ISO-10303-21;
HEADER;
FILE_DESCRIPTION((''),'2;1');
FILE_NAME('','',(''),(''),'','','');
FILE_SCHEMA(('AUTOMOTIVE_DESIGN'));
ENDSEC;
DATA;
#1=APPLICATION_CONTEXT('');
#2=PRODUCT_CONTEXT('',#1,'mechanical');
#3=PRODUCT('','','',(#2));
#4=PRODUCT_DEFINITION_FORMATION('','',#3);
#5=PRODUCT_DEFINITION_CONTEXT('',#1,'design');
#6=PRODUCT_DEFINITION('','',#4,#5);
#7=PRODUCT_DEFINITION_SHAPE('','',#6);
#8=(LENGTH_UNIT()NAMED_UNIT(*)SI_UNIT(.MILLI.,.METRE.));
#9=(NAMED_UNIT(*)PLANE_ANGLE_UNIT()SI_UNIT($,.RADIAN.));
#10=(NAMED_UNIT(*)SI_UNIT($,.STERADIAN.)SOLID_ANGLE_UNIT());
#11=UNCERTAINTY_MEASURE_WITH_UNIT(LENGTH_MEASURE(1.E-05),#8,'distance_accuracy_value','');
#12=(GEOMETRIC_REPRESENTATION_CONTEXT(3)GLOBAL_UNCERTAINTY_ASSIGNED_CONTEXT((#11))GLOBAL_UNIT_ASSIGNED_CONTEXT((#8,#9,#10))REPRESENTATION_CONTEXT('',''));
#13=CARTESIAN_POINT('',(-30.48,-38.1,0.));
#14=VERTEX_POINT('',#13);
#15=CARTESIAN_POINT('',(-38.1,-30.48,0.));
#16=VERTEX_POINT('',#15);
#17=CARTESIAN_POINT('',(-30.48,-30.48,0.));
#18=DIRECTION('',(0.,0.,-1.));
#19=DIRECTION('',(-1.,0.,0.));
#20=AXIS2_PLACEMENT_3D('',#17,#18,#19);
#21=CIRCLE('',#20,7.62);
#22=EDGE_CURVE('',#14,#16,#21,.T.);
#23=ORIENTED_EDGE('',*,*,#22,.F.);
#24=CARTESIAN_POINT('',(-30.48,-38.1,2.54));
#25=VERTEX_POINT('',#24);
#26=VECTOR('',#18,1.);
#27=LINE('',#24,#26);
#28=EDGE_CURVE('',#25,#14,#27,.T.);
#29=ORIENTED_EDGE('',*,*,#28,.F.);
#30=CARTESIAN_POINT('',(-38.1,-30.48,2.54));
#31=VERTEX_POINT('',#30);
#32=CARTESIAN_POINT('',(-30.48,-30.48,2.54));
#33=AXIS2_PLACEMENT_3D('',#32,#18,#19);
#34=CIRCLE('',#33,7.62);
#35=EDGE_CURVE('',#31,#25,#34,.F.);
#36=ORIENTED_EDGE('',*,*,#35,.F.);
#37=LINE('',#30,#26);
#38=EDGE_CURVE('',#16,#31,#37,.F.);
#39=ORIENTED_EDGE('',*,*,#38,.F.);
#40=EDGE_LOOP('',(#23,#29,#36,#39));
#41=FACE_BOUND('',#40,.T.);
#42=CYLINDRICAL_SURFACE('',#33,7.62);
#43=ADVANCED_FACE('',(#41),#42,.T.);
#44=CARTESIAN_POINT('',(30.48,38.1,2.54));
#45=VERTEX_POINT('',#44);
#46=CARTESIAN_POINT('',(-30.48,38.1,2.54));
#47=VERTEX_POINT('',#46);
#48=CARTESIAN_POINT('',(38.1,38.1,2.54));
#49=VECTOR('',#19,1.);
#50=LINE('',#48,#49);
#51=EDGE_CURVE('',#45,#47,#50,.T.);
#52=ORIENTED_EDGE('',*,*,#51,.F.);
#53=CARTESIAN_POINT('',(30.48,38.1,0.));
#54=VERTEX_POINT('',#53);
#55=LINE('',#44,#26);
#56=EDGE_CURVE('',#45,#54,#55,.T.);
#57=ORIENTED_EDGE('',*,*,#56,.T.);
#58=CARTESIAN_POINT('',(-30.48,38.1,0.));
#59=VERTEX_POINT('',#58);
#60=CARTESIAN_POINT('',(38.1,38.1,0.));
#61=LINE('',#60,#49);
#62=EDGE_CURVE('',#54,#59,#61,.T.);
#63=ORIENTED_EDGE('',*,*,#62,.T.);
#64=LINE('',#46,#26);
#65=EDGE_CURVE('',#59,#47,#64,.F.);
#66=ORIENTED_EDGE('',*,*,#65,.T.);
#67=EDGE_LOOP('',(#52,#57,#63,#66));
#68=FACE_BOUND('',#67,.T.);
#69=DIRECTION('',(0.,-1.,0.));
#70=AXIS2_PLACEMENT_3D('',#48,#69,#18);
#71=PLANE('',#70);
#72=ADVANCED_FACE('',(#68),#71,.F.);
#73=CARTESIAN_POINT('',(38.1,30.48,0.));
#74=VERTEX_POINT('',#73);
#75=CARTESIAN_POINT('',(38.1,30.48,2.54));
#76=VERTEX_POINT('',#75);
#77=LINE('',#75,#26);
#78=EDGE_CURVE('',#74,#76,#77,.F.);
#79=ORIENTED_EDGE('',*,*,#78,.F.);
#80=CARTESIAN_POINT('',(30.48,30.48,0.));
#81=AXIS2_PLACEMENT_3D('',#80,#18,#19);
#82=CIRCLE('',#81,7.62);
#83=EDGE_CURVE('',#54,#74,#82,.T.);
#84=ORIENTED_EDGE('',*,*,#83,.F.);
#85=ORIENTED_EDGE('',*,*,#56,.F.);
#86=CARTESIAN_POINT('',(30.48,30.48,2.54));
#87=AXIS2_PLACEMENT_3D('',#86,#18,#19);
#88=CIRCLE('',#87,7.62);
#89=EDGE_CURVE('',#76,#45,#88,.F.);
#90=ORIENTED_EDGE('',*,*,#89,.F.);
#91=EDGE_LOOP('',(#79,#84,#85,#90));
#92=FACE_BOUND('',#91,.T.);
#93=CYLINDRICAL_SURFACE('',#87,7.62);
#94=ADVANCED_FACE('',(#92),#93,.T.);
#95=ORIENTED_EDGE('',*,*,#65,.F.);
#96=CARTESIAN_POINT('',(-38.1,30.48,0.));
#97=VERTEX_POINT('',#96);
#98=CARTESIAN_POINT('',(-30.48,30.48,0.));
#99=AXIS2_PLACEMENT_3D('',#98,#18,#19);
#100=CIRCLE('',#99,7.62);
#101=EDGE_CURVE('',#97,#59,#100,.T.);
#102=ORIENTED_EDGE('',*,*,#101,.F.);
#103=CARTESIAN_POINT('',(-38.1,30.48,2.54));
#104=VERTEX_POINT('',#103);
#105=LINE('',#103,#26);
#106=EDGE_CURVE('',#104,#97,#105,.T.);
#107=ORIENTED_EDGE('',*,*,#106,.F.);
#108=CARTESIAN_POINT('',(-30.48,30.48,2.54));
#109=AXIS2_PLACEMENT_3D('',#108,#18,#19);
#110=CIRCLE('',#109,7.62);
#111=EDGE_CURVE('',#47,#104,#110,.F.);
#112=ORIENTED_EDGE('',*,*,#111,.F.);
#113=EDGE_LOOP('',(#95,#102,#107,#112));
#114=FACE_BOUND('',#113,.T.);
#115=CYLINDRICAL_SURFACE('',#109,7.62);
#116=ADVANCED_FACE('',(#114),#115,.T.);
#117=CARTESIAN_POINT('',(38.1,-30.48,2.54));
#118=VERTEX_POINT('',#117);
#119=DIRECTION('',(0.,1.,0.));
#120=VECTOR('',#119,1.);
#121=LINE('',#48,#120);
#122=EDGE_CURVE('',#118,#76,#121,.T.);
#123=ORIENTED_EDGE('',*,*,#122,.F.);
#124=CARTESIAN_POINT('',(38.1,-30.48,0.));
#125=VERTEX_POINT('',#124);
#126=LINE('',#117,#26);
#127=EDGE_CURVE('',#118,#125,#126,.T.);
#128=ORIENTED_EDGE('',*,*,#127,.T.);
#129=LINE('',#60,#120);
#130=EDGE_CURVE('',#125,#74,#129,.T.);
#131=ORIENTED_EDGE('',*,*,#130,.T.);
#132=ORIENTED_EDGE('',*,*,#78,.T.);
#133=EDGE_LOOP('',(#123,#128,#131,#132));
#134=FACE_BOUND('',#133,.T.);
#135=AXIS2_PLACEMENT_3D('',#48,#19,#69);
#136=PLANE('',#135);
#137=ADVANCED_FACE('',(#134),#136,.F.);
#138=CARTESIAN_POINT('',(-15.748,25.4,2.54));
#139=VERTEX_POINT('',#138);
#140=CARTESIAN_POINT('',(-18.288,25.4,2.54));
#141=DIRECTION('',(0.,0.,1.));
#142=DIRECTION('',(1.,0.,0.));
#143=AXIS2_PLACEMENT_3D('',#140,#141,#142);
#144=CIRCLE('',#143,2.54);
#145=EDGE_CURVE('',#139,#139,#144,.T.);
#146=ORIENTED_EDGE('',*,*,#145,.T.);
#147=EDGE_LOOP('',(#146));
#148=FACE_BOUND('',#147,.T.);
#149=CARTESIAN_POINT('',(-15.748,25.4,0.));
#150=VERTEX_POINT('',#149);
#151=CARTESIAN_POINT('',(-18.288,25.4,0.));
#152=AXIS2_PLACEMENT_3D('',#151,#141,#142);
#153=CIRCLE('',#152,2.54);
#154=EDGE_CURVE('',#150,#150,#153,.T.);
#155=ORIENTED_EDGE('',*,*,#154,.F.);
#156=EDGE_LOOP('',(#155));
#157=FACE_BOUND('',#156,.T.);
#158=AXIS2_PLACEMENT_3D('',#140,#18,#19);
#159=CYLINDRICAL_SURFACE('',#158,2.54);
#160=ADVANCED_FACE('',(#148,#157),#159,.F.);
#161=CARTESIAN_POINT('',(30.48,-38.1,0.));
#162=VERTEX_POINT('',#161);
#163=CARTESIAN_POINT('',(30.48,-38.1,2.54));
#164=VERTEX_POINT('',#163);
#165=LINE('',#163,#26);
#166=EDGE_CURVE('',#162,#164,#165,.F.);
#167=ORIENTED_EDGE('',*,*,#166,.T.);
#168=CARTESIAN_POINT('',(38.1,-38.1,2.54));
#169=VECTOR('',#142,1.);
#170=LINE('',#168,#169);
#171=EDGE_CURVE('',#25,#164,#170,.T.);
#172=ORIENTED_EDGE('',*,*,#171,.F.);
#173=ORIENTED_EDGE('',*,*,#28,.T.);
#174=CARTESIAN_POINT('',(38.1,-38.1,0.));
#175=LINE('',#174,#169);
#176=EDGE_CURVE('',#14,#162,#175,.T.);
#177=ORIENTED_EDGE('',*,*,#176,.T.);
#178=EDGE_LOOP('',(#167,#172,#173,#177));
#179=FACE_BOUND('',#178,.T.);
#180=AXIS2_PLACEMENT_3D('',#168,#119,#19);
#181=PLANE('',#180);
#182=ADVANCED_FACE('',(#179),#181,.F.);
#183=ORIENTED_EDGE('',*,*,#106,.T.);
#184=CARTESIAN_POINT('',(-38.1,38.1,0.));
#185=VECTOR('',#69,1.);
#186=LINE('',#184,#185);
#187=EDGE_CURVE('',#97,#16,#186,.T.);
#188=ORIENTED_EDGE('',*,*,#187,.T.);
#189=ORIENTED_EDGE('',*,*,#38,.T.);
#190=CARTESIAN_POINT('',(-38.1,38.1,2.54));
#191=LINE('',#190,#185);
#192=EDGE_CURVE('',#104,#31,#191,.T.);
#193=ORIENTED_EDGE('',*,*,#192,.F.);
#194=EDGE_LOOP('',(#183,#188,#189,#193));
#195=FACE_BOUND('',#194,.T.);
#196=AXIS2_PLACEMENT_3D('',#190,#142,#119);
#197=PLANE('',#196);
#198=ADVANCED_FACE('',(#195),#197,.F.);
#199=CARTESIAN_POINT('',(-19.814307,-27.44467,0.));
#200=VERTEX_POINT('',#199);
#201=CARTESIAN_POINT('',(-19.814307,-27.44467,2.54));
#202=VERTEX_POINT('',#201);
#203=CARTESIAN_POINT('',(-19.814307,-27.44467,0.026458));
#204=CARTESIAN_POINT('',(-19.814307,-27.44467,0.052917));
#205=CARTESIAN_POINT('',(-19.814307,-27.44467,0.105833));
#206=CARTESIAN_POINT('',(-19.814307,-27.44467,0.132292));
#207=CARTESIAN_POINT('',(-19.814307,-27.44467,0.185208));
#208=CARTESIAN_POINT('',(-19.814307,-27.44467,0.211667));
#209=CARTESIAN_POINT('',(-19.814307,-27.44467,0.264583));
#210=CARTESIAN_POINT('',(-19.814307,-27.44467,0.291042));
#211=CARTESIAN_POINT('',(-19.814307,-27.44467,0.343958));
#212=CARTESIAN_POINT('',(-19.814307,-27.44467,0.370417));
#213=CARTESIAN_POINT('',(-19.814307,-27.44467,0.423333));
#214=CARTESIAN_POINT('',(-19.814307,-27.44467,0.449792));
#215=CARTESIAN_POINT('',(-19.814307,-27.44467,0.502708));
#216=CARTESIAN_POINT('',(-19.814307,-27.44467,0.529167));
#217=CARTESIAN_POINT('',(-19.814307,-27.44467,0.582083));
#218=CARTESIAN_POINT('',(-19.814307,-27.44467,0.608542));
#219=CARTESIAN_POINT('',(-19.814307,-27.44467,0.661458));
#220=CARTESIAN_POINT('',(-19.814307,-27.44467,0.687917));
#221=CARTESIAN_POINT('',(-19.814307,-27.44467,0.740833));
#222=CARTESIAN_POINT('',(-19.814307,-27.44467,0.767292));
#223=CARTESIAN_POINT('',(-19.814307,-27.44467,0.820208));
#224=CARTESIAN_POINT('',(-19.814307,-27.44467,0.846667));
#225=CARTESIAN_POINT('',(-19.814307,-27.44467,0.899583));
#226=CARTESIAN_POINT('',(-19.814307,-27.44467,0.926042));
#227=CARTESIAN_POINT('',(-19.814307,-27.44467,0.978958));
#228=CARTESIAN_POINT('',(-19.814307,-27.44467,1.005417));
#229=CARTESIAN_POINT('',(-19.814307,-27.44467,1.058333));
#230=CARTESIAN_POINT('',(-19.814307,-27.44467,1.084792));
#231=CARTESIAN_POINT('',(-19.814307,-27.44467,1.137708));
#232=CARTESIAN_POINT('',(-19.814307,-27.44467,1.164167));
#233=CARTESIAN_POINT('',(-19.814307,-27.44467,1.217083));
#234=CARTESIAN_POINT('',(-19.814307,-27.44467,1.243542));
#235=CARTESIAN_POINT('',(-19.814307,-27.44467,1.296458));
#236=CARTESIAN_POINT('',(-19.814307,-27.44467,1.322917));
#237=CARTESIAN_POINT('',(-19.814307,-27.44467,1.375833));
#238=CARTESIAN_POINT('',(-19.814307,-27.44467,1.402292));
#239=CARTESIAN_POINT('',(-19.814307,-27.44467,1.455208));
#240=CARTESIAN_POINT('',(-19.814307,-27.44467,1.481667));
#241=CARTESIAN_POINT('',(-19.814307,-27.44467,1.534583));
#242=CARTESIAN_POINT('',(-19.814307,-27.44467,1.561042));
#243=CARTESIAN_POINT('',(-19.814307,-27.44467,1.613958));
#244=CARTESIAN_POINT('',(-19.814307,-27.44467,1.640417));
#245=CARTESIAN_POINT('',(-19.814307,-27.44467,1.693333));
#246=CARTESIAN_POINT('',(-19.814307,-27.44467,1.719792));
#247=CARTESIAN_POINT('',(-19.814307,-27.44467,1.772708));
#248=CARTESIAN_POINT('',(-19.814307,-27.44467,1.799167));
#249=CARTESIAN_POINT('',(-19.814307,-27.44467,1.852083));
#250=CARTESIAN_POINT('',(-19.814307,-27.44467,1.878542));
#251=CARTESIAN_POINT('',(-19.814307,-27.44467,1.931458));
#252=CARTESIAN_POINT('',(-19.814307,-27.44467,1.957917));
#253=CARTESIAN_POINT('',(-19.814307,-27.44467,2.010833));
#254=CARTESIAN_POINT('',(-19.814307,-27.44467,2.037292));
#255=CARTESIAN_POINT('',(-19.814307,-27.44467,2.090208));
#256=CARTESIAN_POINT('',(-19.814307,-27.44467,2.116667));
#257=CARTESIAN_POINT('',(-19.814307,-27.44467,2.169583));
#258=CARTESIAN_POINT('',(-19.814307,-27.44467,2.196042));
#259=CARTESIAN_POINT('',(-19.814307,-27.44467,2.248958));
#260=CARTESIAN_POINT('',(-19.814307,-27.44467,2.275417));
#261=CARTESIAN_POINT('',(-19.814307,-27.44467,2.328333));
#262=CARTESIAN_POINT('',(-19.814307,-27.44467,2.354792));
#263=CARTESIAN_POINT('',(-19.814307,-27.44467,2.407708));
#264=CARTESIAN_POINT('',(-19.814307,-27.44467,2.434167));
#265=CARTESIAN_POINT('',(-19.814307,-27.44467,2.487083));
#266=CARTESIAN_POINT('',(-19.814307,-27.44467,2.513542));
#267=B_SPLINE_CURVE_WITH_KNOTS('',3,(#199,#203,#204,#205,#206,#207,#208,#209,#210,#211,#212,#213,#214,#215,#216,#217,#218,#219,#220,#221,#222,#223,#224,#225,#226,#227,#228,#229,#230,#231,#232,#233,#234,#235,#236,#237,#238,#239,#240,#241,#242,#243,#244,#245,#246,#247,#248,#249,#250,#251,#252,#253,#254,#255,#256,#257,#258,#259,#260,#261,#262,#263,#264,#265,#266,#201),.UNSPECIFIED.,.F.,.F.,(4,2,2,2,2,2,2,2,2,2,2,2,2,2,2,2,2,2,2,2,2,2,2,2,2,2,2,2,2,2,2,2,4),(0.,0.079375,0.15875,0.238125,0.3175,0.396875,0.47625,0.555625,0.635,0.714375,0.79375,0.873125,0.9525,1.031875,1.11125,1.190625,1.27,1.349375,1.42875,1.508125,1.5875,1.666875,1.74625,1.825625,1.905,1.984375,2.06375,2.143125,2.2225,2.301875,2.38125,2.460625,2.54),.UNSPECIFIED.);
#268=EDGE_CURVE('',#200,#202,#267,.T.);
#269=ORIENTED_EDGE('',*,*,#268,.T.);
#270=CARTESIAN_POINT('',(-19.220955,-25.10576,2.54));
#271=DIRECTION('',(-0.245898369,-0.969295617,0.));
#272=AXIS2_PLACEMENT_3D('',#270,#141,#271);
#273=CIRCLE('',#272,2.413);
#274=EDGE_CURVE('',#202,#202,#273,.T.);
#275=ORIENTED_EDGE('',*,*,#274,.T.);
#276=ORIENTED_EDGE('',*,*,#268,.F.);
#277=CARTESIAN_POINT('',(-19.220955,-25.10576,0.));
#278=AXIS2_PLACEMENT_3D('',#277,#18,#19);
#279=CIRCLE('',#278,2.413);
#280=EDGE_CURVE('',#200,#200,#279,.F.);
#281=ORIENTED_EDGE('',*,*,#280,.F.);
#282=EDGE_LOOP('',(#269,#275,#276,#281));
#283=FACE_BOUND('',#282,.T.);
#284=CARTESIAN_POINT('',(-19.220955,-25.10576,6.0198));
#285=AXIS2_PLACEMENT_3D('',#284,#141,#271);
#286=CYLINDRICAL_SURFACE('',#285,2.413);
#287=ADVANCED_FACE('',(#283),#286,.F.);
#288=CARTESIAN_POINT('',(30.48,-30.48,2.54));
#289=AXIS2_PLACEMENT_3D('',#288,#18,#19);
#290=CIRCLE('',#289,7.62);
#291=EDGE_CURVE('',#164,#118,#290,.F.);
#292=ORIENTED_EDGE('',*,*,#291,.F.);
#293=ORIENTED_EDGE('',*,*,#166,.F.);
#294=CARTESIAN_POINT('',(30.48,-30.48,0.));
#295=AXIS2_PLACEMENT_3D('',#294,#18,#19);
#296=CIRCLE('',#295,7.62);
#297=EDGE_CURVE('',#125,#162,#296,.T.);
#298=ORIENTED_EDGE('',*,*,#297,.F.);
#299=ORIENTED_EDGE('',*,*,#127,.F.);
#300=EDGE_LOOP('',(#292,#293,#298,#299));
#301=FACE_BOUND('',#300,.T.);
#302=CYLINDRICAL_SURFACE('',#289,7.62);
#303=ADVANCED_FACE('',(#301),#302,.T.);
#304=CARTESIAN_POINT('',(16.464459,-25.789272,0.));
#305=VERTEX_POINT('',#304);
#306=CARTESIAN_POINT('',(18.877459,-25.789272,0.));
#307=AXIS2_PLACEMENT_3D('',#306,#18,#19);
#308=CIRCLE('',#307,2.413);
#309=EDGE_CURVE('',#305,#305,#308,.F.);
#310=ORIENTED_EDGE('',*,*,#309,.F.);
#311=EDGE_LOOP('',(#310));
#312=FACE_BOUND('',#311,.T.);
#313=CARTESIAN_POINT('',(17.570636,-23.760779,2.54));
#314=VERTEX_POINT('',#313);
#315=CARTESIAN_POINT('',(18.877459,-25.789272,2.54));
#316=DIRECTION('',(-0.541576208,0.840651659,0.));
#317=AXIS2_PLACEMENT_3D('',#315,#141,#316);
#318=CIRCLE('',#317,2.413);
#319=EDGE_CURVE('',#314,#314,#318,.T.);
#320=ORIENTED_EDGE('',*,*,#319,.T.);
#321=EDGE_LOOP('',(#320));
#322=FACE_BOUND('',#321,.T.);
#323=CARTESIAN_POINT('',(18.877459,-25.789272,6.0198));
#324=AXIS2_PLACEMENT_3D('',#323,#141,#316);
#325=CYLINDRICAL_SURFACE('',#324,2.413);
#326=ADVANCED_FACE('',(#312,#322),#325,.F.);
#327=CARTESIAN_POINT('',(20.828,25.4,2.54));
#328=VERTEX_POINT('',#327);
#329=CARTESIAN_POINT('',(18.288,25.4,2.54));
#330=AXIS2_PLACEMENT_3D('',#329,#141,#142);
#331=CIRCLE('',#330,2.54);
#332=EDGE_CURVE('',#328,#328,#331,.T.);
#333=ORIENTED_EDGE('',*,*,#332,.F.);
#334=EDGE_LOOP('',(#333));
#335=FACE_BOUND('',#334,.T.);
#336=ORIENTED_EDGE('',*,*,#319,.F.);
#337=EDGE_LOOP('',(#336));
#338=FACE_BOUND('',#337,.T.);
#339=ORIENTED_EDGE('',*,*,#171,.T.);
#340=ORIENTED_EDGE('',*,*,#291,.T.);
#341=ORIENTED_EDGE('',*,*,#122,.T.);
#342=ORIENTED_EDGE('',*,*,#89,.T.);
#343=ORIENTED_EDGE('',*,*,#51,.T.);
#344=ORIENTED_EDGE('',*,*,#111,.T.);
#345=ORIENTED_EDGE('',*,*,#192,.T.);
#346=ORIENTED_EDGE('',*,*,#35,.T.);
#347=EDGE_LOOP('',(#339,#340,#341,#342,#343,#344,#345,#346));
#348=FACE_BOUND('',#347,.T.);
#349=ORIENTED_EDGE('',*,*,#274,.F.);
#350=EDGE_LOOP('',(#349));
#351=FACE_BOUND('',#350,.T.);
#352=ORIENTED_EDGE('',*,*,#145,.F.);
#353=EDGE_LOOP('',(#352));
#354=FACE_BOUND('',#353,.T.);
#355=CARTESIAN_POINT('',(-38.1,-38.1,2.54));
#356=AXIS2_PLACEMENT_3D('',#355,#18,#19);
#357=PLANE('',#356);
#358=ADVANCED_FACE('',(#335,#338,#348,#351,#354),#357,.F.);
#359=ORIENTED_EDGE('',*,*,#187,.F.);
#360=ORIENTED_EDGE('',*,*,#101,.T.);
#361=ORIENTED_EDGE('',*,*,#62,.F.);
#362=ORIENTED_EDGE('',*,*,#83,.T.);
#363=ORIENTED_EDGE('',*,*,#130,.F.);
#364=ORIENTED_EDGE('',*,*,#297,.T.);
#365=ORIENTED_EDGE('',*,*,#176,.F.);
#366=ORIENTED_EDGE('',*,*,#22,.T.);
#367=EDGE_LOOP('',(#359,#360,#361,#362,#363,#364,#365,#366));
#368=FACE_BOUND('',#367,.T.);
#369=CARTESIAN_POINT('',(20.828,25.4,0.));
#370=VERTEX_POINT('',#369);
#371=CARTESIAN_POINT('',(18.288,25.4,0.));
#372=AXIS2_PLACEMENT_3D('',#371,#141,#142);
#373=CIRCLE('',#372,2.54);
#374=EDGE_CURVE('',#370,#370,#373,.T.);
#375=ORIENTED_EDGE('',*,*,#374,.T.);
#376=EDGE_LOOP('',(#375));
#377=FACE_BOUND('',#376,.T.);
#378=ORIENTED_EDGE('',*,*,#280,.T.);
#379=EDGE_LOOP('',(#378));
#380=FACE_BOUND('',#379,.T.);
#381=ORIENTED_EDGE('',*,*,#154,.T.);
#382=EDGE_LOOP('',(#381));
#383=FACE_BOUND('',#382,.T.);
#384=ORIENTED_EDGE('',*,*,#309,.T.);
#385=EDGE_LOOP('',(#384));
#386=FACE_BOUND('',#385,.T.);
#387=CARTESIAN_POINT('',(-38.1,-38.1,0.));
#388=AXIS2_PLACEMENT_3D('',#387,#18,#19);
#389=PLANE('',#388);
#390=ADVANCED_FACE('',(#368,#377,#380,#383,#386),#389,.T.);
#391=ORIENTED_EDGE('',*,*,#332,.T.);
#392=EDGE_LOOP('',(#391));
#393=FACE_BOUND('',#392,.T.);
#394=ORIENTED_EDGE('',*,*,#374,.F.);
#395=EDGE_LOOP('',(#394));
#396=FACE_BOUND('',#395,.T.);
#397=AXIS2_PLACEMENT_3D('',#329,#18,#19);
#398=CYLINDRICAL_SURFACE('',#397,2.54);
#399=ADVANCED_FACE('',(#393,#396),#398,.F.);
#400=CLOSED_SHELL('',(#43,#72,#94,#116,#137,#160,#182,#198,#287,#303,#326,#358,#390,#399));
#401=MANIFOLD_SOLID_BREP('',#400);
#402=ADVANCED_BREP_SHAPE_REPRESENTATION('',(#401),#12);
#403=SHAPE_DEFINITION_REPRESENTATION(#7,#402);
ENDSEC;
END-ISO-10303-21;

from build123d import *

# Parameters (mm, degrees)
SKETCH1_W           = 76.2
SKETCH1_H           = 76.2
SKETCH1_R           = 2.54
BOSS_EXTRUDE1_DEPTH = 2.54
FILLET1_R           = 7.62
FILLET2_R           = 7.62
FILLET3_R           = 7.62
FILLET4_R           = 7.62
CAVITY1_OUTLINE_R   = 2.413
CAVITY1_DEPTH       = 2.54


# Read off the part's stored shape, not the designer's step: Cavity1
with BuildPart() as part:
    # Sketch1 → Boss-Extrude1 (new body)
    with BuildSketch(Plane.XY):
        Rectangle(SKETCH1_W, SKETCH1_H)
        with Locations((-18.288, 25.4)):
            Circle(SKETCH1_R, mode=Mode.SUBTRACT)
        with Locations((18.288, 25.4)):
            Circle(SKETCH1_R, mode=Mode.SUBTRACT)
    extrude(amount=BOSS_EXTRUDE1_DEPTH)

    # Fillet1
    fillet1_edges = [part.edges().sort_by_distance(p)[0] for p in [
        (38.1, 38.1, 1.27),
    ]]
    fillet(fillet1_edges, radius=FILLET1_R)

    # Fillet2
    fillet2_edges = [part.edges().sort_by_distance(p)[0] for p in [
        (38.1, -38.1, 1.27),
    ]]
    fillet(fillet2_edges, radius=FILLET2_R)

    # Fillet3
    fillet3_edges = [part.edges().sort_by_distance(p)[0] for p in [
        (-38.1, -38.1, 1.27),
    ]]
    fillet(fillet3_edges, radius=FILLET3_R)

    # Fillet4
    fillet4_edges = [part.edges().sort_by_distance(p)[0] for p in [
        (-38.1, 38.1, 1.27),
    ]]
    fillet(fillet4_edges, radius=FILLET4_R)

    # Cavity1 outline → Cavity1 (cut)
    with BuildSketch(Plane.XY):
        with Locations((18.877459074, -25.789271924)):
            Circle(CAVITY1_OUTLINE_R)
        with Locations((-19.220954695, -25.105760078)):
            Circle(CAVITY1_OUTLINE_R)
    extrude(amount=CAVITY1_DEPTH, mode=Mode.SUBTRACT)


solid = part.part
